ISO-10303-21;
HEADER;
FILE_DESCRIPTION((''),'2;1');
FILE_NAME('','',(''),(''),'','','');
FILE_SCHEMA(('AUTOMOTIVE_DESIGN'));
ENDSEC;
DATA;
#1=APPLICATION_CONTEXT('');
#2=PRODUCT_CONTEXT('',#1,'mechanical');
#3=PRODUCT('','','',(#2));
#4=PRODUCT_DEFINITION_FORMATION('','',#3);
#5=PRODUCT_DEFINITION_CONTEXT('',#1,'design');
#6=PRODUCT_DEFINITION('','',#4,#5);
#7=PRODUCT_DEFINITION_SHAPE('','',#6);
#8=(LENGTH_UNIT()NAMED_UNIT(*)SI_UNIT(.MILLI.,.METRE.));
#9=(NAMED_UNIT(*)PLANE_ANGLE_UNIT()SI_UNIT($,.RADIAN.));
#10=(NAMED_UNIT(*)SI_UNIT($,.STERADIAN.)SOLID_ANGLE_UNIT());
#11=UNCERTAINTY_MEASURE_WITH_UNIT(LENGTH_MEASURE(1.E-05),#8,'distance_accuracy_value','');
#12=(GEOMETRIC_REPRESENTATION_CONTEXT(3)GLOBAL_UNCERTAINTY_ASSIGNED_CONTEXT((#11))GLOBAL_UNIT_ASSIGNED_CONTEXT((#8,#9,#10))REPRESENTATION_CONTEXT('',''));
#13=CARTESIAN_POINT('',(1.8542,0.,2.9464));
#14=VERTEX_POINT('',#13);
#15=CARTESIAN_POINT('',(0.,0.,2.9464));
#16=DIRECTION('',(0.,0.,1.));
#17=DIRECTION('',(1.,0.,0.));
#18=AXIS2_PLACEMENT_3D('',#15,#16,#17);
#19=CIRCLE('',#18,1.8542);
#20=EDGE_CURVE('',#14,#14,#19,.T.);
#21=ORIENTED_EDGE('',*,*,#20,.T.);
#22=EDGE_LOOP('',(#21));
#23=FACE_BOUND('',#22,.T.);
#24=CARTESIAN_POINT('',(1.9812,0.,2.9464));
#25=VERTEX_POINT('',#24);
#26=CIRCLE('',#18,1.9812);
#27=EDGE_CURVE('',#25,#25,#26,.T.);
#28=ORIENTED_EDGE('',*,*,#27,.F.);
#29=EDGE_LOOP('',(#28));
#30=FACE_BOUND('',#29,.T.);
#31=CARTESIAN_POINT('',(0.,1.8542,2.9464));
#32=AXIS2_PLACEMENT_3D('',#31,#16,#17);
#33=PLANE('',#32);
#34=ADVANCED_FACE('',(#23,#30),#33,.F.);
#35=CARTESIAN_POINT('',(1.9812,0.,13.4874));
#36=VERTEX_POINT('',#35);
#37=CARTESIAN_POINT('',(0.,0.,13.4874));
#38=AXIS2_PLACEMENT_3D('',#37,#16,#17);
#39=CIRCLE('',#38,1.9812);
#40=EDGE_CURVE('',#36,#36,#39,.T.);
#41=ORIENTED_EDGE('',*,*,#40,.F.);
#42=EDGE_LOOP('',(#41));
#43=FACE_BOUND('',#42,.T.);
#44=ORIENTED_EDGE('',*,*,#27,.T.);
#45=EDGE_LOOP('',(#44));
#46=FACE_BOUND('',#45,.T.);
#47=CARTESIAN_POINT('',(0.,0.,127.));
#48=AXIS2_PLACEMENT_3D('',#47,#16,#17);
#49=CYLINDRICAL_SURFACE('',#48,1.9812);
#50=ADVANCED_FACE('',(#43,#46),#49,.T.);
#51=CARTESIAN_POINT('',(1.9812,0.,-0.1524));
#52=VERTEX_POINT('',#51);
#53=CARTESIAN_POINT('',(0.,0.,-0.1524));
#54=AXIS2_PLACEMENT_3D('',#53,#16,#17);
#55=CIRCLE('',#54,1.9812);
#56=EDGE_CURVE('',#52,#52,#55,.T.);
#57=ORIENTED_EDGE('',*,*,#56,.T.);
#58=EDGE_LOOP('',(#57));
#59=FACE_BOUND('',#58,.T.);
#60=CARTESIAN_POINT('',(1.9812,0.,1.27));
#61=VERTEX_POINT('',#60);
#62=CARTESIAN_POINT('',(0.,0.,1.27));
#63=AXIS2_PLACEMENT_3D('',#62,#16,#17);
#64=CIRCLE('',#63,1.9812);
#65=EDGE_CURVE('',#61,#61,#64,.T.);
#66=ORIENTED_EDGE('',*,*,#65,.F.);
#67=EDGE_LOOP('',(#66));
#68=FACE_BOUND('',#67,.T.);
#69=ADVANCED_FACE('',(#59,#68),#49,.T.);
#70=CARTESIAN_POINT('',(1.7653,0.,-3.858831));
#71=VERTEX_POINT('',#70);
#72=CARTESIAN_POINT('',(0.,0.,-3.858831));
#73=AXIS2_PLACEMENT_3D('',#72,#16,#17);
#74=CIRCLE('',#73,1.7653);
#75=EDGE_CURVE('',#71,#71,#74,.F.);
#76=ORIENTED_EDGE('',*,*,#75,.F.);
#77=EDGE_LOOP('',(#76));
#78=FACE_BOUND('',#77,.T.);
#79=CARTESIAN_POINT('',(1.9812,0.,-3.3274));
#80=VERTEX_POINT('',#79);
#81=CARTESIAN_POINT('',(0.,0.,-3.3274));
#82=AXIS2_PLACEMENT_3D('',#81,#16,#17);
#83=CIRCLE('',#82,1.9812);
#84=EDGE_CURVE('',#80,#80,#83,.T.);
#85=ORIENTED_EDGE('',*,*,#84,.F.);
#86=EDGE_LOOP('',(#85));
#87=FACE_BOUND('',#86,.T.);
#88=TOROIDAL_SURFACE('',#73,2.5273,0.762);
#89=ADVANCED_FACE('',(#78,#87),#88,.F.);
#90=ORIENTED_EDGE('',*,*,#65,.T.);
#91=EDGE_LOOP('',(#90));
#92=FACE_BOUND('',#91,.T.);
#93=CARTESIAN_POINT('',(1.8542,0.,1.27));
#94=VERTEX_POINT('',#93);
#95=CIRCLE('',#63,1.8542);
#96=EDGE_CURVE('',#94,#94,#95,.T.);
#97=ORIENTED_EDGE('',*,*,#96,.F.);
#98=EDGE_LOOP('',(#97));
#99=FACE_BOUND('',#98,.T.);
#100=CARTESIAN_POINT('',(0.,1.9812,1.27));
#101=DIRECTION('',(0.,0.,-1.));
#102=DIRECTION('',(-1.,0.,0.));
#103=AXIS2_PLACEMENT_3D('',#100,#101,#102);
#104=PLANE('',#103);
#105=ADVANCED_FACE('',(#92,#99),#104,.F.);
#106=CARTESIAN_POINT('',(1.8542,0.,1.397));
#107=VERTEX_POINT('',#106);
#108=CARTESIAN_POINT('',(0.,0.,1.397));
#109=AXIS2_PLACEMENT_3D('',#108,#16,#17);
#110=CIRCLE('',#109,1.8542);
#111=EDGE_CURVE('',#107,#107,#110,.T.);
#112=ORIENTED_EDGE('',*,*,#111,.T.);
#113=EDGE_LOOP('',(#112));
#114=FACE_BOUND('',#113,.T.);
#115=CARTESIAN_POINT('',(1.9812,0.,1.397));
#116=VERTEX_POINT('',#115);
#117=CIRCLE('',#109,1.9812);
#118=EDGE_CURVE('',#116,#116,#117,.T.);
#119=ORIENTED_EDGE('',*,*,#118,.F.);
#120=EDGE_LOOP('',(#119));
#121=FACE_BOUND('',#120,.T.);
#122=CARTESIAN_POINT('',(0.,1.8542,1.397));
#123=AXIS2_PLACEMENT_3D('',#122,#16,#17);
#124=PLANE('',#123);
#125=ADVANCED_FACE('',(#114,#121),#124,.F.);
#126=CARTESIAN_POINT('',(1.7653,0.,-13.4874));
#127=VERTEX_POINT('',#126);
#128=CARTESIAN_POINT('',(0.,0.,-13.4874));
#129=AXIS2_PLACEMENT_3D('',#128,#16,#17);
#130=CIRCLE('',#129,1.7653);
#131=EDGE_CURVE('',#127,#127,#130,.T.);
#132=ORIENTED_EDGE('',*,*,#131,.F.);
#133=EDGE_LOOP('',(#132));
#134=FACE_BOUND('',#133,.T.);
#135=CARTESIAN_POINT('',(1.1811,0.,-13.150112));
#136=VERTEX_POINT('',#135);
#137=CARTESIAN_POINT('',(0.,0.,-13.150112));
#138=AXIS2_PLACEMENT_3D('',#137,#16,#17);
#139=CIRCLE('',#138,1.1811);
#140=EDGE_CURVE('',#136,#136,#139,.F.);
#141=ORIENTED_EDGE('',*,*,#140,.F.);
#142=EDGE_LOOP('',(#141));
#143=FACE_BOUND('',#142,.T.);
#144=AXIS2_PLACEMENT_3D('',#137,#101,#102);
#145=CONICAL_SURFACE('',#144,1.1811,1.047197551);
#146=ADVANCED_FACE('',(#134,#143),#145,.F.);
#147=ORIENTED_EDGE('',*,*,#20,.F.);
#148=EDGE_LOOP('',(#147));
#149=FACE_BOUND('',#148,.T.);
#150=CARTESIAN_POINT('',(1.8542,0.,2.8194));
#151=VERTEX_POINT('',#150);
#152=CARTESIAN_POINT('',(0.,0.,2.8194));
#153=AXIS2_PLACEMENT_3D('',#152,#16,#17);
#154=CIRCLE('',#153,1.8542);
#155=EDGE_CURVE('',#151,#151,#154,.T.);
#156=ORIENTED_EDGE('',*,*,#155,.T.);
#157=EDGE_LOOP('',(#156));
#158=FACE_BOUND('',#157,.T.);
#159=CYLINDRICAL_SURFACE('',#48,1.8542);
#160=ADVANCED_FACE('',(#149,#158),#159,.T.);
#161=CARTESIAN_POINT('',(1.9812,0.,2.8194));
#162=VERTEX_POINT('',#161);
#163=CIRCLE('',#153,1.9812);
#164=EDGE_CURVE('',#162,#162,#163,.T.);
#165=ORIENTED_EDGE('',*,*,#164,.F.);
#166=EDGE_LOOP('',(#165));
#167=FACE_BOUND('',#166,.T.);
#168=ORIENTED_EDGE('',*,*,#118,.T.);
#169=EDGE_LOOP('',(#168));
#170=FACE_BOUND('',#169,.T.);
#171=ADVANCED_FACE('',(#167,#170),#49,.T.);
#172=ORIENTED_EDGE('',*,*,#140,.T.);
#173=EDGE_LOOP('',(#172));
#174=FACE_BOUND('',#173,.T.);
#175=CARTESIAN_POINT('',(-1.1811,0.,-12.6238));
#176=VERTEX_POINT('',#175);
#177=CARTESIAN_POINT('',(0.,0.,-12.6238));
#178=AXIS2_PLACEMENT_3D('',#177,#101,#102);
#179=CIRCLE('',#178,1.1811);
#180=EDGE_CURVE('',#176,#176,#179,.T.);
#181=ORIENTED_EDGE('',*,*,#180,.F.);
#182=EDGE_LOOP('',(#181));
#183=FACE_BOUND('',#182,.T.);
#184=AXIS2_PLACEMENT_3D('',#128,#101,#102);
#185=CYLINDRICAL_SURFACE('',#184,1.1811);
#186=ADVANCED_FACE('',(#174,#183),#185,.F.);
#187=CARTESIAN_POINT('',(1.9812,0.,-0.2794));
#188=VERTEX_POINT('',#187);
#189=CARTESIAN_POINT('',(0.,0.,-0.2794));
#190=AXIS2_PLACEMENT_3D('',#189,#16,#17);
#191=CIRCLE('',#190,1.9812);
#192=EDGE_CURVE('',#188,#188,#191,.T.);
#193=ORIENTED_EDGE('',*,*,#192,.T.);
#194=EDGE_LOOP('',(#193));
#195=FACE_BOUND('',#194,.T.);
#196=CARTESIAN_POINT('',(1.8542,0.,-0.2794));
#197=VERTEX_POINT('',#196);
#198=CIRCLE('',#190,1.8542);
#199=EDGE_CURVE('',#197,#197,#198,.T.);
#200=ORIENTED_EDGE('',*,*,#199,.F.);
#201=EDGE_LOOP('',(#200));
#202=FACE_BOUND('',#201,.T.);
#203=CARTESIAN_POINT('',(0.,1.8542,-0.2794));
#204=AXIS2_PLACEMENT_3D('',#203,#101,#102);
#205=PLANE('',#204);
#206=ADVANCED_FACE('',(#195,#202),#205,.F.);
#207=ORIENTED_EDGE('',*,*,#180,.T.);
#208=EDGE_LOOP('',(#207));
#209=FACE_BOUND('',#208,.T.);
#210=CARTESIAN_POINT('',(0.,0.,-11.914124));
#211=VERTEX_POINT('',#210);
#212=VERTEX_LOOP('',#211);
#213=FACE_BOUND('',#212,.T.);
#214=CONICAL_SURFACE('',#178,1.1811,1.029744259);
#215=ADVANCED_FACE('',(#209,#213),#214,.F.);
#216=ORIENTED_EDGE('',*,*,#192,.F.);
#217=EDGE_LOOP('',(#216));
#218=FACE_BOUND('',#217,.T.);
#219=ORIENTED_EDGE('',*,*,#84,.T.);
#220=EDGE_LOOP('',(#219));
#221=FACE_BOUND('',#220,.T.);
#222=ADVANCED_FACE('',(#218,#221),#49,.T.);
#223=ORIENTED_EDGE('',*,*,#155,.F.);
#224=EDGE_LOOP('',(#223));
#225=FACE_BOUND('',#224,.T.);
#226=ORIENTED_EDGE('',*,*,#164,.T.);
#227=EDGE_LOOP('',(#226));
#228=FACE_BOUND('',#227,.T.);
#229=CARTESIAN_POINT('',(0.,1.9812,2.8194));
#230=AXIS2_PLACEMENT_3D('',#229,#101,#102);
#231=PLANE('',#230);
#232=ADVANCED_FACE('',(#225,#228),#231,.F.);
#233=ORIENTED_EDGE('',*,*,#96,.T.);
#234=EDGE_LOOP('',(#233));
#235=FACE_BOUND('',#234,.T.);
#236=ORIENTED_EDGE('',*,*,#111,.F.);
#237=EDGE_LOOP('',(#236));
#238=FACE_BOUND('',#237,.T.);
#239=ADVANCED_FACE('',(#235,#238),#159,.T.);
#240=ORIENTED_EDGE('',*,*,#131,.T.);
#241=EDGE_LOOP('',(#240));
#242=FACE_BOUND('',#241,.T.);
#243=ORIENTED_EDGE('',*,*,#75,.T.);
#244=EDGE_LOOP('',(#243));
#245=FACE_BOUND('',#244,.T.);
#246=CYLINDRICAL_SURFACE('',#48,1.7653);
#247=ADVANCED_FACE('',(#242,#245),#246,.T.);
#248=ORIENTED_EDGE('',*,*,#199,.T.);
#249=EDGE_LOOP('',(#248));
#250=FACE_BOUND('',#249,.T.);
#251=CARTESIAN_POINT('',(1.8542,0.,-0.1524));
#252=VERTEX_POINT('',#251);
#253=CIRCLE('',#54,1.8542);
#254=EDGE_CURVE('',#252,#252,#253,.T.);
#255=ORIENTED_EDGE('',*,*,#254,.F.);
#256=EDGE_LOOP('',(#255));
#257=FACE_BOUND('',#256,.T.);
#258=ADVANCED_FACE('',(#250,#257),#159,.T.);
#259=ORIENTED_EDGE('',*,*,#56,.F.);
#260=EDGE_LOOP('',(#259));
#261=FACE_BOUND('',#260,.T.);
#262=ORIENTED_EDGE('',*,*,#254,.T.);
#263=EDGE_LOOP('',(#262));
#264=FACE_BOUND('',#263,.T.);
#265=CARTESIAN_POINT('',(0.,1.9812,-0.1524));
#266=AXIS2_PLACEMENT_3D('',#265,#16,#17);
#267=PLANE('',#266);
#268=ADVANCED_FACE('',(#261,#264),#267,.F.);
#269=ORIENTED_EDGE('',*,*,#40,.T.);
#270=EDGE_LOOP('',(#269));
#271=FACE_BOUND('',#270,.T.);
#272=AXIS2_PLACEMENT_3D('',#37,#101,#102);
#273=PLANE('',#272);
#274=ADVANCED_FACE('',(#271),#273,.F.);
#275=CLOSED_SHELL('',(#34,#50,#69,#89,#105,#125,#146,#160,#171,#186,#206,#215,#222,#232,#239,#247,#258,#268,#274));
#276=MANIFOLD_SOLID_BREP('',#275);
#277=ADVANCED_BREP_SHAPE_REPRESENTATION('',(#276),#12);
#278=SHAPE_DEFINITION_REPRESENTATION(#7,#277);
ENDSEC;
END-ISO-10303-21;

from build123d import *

# Parameters (mm, degrees)
REDONDEO1_R                      = 0.762
TALADRO_DE_MARGEN_PARA_101_D     = 2.3622
TALADRO_DE_MARGEN_PARA_101_DEPTH = 0.8636
TALADRO_DE_MARGEN_PARA_101_TIP   = 0.709676477
CHAFL_N1_SIZE2                   = 0.337288027
CHAFL_N1_SIZE                    = 0.5842


# Some blends are built 0.0001 mm under size
with BuildPart() as part:
    # Croquis1 → Revolución1 (revolve)
    with BuildSketch(Plane(origin=(0, 0, 0), x_dir=(0, 0, -1), z_dir=(1, 0, 0)), mode=Mode.PRIVATE) as revoluci_n1_sk:
        Polygon((-13.4874, 0), (-13.4874, 1.9812), (-2.9464, 1.9812), (-2.9464, 1.8542), (-2.8194, 1.8542), (-2.8194, 1.9812), (-1.397, 1.9812), (-1.397, 1.8542), (-1.27, 1.8542), (-1.27, 1.9812), (0.1524, 1.9812), (0.1524, 1.8542), (0.2794, 1.8542), (0.2794, 1.9812), (3.3274, 1.9812), (3.3274, 1.7653), (13.4874, 1.7653), (13.4874, 0), align=None)
    revolve(revoluci_n1_sk.sketch.rotate(Axis((0, 0, 127), (0, 0, -1)), 90), axis=Axis((0, 0, 127), (0, 0, -1)))

    # Redondeo1
    # the kernel refuses this fillet: 0.762 mm, written as the material it adds along each edge
    with BuildSketch(Plane(origin=(0, 0, -3.3274), x_dir=(1, 0, 0), z_dir=(0, 1, 0))) as redondeo1_piece_1:
        with BuildLine():
            CenterArc((2.5273, 0.531430889), REDONDEO1_R, 180, 44.220044428)
            Line((1.7653, 0.531430889), (1.75006, 0.531430889))
            Line((1.75006, 0.531430889), (1.75006, 0))
            Line((1.75006, 0), (1.7653, -0.01524))
            ThreePointArc((1.7653, -0.01524), (1.87325, -0.01524), (1.970278, -0.010628618))
            Line((1.970278, -0.010628618), (1.9812, 0))
        make_face()
    revolve(axis=Axis((0, 0, -3.3274), (0, 0, -1)))

    # Taladro de margen para #101
    with Locations(Plane(origin=(0, 0, -13.4874), x_dir=(-1, 0, 0), z_dir=(0, 0, -1))):
        with Locations((0, 0)):
            Hole(TALADRO_DE_MARGEN_PARA_101_D / 2, depth=TALADRO_DE_MARGEN_PARA_101_DEPTH)
            with Locations((0, 0, -(TALADRO_DE_MARGEN_PARA_101_DEPTH + TALADRO_DE_MARGEN_PARA_101_TIP / 2))):  # 118° drill point
                Cone(0, TALADRO_DE_MARGEN_PARA_101_D / 2, TALADRO_DE_MARGEN_PARA_101_TIP, mode=Mode.SUBTRACT)

    # Chaflán1
    chafl_n1_edges = [part.edges().sort_by_distance(p)[0] for p in [
        (-1.1811, 0, -13.4874),
    ]]
    chafl_n1_side = [part.faces().sort_by_distance(p)[0] for p in [
        (-1.187845761, 0, -13.4874),
    ]]
    chamfer(chafl_n1_edges, length=CHAFL_N1_SIZE - 0.0001, length2=CHAFL_N1_SIZE2 - 0.0001, reference=chafl_n1_side[0])  # a hair under: the kernel refuses the full size


solid = part.part
